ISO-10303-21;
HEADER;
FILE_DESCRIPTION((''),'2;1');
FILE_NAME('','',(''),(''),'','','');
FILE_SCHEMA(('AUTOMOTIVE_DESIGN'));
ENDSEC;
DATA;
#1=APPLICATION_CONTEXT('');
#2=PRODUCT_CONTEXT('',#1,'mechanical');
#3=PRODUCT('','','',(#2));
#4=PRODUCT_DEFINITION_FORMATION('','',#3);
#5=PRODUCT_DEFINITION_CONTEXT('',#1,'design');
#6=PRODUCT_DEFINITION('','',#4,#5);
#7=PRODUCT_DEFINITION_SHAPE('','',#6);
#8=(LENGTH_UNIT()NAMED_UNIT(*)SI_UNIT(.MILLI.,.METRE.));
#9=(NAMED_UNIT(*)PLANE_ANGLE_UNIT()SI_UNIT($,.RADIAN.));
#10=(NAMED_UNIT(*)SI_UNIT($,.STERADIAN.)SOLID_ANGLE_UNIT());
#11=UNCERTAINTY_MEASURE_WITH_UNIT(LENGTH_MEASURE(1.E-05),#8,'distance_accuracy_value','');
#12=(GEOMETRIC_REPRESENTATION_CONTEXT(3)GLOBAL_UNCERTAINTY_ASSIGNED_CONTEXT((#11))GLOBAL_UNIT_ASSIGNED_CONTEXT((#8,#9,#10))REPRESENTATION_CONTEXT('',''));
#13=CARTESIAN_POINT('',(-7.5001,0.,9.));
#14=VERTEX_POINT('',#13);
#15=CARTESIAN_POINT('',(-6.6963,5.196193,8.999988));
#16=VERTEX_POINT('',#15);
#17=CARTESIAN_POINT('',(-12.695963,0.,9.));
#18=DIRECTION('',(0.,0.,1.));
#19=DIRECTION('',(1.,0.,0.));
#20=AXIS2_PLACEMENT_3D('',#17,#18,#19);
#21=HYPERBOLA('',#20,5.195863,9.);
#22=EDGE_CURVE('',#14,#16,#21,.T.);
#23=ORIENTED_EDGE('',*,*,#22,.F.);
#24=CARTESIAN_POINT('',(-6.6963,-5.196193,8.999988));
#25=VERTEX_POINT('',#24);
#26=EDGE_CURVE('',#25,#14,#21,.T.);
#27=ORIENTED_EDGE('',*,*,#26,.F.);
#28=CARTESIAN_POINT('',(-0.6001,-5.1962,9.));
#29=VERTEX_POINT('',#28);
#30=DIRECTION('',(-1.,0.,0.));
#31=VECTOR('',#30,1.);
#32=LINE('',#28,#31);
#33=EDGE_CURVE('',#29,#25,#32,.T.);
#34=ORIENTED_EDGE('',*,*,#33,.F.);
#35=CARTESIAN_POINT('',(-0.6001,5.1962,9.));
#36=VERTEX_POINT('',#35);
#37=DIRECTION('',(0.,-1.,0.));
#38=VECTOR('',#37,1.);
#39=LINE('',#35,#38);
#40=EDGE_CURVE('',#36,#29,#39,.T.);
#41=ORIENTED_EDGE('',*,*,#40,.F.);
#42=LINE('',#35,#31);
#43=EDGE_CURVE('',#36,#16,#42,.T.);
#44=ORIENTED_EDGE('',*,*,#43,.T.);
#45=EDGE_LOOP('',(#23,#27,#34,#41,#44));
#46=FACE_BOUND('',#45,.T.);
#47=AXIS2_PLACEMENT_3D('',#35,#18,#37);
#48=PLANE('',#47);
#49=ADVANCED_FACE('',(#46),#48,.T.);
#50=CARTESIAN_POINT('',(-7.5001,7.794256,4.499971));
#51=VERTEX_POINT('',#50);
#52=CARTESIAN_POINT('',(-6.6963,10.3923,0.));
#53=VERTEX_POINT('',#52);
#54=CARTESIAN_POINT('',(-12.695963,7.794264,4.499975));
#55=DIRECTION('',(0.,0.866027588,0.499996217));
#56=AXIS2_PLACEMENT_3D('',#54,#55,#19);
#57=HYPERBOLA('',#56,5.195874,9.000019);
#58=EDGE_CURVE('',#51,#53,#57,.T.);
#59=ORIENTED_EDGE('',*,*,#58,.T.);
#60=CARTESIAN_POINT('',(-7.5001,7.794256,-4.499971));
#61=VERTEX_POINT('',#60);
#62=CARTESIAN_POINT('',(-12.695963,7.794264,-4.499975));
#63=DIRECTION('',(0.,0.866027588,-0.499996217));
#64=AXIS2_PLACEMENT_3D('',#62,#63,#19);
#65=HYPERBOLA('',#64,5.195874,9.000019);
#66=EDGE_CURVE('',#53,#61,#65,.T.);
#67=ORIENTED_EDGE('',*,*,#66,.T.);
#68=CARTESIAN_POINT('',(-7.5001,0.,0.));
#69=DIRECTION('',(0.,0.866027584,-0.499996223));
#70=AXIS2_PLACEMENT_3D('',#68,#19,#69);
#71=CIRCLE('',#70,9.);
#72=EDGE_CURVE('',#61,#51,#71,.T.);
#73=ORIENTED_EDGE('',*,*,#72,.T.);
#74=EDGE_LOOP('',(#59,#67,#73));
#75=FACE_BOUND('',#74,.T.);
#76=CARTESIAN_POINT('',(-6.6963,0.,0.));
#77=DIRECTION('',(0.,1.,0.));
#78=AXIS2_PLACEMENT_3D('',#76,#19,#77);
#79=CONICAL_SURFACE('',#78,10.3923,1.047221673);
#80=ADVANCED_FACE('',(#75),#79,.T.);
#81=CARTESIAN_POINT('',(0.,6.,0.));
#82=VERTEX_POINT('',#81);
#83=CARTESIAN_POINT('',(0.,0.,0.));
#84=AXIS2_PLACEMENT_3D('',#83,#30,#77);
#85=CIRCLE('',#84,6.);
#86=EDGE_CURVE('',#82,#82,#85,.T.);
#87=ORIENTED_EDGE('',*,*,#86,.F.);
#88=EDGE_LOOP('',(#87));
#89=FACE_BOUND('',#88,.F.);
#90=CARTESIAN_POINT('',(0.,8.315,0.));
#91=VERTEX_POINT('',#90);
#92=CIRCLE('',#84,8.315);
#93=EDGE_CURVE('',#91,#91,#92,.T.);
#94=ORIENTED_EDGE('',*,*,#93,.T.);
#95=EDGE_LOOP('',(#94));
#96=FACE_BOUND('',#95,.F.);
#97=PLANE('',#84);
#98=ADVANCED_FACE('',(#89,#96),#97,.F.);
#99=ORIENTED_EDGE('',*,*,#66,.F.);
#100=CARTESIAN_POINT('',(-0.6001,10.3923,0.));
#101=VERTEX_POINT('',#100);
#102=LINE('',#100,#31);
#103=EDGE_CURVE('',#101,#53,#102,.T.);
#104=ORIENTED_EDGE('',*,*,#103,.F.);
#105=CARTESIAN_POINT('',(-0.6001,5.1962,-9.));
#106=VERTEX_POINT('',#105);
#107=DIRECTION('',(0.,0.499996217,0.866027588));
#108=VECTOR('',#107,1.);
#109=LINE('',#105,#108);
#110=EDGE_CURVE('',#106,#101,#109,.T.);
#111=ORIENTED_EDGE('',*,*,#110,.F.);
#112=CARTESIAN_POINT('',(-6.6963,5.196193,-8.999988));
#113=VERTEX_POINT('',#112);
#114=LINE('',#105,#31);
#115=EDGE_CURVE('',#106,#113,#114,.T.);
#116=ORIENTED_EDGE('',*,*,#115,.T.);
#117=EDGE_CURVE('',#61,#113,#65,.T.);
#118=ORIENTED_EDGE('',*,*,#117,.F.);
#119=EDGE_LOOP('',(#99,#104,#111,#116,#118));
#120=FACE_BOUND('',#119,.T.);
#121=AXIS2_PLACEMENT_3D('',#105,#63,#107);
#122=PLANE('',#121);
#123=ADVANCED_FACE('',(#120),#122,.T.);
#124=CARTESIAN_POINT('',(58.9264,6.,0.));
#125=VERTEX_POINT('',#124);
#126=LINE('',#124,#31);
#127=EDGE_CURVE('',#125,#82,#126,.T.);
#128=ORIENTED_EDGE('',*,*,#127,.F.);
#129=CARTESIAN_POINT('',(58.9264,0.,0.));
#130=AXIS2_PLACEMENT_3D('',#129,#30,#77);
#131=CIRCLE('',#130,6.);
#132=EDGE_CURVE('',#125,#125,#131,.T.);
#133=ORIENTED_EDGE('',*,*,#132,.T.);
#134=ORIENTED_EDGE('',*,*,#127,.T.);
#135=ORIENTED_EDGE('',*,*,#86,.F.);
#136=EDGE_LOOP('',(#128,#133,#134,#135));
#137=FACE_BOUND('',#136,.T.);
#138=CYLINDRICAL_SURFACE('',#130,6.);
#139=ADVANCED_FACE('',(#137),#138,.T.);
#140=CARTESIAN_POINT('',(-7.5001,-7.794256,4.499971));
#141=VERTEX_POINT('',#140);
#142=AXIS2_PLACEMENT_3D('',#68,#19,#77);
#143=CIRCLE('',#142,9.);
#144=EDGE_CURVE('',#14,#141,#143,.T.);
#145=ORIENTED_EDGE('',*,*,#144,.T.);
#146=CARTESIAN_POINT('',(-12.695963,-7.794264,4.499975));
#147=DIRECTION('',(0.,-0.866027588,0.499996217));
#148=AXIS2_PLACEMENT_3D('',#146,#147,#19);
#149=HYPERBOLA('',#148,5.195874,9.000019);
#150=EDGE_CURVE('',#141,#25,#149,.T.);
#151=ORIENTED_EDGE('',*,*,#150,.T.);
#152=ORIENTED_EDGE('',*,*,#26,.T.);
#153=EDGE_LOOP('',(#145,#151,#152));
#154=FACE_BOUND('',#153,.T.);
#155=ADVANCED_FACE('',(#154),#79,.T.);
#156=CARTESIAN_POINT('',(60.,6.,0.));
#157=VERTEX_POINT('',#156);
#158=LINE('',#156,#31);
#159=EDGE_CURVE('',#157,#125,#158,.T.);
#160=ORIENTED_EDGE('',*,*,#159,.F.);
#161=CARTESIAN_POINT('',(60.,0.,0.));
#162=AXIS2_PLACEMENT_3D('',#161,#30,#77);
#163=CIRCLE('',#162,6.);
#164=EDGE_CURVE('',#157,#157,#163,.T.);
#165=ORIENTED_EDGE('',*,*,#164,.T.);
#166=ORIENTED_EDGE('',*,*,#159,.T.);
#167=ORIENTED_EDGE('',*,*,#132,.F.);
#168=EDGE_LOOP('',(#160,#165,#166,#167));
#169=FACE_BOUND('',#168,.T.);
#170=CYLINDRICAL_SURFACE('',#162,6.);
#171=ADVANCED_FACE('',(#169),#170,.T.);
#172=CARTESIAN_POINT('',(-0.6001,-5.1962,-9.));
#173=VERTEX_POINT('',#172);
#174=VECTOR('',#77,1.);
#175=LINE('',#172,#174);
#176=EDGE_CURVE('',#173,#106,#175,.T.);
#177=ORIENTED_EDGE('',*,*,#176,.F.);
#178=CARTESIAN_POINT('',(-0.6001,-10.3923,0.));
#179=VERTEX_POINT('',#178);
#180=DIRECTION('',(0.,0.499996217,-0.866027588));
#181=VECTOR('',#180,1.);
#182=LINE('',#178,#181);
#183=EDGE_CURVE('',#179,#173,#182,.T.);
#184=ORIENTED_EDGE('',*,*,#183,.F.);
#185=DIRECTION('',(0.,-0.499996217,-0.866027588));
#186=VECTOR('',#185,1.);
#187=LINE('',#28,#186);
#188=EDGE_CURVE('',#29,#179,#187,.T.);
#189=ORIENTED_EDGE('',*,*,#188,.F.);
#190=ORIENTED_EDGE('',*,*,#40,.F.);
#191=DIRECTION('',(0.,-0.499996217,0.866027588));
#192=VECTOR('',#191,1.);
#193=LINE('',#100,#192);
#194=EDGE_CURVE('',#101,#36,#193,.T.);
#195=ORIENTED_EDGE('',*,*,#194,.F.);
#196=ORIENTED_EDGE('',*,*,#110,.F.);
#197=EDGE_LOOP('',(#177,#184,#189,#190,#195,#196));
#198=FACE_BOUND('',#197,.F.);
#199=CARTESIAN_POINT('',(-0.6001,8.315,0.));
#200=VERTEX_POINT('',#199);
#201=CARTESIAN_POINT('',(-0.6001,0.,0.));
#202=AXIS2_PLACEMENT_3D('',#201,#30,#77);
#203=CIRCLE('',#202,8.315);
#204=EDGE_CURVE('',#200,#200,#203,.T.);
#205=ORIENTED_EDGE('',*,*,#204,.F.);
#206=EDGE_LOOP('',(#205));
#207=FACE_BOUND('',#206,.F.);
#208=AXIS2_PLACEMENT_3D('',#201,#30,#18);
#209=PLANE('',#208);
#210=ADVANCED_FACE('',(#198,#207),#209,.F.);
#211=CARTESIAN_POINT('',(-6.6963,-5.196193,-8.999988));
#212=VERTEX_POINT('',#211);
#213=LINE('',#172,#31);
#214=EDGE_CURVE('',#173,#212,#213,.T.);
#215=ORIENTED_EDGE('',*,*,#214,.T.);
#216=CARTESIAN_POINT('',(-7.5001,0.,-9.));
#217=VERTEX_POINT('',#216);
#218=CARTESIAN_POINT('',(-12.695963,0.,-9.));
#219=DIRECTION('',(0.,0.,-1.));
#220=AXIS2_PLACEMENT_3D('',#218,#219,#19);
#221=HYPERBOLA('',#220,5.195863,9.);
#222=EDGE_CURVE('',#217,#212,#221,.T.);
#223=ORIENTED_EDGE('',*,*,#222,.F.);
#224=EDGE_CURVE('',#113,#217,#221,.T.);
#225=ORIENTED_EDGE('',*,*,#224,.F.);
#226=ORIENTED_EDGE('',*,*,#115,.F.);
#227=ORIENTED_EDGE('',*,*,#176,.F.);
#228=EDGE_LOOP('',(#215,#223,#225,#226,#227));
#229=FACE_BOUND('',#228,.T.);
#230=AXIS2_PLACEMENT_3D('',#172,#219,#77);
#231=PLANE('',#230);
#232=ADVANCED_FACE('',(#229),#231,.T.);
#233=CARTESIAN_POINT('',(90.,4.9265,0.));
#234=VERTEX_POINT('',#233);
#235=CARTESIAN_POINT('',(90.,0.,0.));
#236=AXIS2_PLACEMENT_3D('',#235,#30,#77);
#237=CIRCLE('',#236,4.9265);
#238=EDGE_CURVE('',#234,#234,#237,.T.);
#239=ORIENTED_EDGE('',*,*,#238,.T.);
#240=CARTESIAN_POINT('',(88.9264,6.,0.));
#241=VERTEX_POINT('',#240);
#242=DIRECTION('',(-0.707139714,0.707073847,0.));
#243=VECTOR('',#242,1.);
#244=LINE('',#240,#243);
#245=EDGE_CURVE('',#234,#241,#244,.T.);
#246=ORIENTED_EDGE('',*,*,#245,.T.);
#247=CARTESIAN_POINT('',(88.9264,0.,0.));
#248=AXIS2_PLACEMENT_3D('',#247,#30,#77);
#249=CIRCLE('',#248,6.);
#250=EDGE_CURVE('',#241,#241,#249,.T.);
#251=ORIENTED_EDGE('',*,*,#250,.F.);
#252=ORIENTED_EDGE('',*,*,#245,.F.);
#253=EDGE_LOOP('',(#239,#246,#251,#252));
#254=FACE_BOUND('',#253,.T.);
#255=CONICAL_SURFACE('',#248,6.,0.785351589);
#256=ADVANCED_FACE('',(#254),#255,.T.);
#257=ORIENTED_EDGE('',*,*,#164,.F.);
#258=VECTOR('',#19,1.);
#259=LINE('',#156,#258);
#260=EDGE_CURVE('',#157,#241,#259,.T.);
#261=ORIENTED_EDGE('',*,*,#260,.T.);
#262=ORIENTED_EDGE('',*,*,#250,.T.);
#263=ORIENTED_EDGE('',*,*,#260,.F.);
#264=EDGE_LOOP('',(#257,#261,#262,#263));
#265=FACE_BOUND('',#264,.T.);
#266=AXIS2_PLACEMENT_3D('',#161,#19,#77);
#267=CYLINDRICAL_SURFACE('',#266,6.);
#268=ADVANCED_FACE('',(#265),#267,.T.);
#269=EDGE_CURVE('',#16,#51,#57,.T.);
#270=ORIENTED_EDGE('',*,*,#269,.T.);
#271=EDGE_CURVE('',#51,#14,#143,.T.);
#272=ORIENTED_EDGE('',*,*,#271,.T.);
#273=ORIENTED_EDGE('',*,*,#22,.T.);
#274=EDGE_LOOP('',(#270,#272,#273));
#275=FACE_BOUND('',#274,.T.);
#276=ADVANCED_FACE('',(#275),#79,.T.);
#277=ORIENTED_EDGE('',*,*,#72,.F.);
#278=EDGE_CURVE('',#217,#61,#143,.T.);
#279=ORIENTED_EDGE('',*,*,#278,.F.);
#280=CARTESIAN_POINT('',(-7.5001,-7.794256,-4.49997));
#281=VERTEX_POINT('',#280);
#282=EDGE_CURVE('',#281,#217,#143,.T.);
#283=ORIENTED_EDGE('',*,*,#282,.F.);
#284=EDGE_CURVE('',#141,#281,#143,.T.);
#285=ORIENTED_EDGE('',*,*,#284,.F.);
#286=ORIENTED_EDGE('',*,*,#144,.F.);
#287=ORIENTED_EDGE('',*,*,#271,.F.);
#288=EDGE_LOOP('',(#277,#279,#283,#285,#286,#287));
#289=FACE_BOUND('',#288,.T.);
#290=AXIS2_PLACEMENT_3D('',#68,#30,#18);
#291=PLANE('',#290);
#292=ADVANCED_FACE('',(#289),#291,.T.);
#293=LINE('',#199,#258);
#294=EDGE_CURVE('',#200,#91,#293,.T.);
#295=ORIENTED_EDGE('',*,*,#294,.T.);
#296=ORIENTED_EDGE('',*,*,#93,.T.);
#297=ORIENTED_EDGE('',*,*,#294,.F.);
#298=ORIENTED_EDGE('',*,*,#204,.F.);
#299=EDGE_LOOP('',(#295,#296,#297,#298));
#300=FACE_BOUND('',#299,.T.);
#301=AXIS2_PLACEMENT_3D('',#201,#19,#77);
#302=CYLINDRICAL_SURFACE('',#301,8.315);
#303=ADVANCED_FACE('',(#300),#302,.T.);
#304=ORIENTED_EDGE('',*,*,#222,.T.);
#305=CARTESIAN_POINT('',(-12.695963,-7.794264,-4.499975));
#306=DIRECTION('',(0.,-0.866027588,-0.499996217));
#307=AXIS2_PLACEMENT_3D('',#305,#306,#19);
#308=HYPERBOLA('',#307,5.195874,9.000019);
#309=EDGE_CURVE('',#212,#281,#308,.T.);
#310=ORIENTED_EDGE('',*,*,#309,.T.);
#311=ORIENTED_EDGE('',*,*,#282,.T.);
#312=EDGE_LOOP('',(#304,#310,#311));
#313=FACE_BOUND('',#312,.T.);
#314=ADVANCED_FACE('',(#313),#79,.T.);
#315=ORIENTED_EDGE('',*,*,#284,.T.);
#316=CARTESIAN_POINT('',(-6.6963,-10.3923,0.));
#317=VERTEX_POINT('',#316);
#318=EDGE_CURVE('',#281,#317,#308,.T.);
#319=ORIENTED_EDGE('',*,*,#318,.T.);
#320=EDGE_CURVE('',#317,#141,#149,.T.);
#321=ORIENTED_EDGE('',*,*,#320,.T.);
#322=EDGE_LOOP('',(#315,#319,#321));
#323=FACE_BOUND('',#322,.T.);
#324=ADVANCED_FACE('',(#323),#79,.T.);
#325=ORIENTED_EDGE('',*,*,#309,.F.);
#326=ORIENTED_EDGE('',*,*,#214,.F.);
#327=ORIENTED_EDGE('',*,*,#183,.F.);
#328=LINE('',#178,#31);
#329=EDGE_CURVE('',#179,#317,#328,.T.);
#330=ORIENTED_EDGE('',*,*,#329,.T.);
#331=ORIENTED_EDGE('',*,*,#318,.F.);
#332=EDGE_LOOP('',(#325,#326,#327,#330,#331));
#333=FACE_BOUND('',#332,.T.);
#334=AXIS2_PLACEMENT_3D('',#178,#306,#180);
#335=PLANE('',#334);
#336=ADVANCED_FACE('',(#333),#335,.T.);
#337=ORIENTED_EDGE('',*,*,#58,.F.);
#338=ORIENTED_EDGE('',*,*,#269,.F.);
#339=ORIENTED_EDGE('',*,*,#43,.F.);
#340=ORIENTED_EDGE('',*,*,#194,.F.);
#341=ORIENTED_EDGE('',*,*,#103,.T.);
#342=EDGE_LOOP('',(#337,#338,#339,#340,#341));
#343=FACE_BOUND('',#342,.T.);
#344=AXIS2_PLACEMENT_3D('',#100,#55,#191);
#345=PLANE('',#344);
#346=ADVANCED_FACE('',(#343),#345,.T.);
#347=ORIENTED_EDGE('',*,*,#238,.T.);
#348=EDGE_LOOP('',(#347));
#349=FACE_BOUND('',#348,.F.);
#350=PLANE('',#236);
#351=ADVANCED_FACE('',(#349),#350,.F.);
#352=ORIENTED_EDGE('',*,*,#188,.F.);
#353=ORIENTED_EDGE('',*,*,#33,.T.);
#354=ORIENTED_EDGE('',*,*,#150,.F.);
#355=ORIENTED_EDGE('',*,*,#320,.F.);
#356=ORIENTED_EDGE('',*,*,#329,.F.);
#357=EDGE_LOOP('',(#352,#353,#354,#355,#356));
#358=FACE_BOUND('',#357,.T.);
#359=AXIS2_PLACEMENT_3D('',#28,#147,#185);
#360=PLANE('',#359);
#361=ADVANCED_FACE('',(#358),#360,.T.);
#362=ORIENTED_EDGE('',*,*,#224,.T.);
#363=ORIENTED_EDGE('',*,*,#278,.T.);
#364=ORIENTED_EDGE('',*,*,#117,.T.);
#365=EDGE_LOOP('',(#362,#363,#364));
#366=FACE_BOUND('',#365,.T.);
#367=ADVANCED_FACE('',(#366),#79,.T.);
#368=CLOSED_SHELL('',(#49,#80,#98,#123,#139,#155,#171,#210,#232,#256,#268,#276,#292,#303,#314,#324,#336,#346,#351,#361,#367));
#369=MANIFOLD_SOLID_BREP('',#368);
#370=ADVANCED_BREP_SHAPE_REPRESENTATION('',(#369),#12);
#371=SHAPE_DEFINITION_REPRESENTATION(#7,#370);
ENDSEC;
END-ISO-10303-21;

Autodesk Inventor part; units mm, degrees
ref_plane "YZ Plane" through (0, 0, 0) normal (1, 0, 0) x (0, 1, 0)
ref_plane "XZ Plane" through (0, 0, 0) normal (0, 1, 0) x (-1, 0, 0)
sketch "Sketch1" plane through (0, 0, 0) normal (0, 0, 1) x (1, 0, 0)
  line L0 (0, 8.315) -> (0, 6)
  line L1 (60, 6) -> (90, 6)
  line L2 (90, 6) -> (90, 0)
  line L3 (90, 0) -> (-0.6001, 0)
  line L4 (-18.7201, 0) -> (108.12, 0) projected
  line L5 (-0.6001, 0) -> (-0.6001, 8.315)
  line L6 (-0.6001, 8.315) -> (0, 8.315)
  line L7 (60, 6) -> (58.9264, 6)
  line L8 (58.9264, 6) -> (0, 6)
  line L9 (0, -1.663) -> (0, 9.978) projected
  dimension "d0" = 90
  dimension "d1" = 30
  dimension "d2" = 12
  dimension "d9" = 0.6001
  dimension "d10" = 16.63
  dimension "d13" = 1.0736
  dimension "d14" = 12
revolve "Body" add sketch "Sketch1" angle 360 about axis through (90, 0, 0) along (-1, 0, 0)
sketch "Sketch2" plane through (-0.6001, 0, 0) normal (-1, 0, 0) x (0, 0, 1)
  line L0 (0, 10.3923) -> (9, 5.1962)
  line L1 (9, 5.1962) -> (9, -5.1962)
  line L2 (9, -5.1962) -> (0, -10.3923)
  line L3 (0, -10.3923) -> (-9, -5.1962)
  line L4 (-9, -5.1962) -> (-9, 5.1962)
  line L5 (-9, 5.1962) -> (0, 10.3923)
  point P0 (0, 0)
  point P1 (0, 0)
  dimension "d11" = 18
extrude "Head" add sketch "Sketch2" along normal blind 6.9
sketch "Sketch4" plane through (0, 0, 0) normal (0, 0, 1) x (1, 0, 0)
  line L0 (-7.5001, 9) -> (-7.5001, 10.3923)
  line L1 (-7.5001, 10.3923) -> (-6.6963, 10.3923)
  line L2 (-6.6963, 10.3923) -> (-7.5001, 9)
  line L3 (-8.8801, 0) -> (0.7799, 0) projected
  line L4 (-0.6001, 10.3923) -> (-7.5001, 10.3923) projected
  line L5 (-7.5001, 5.1962) -> (-7.5001, 10.3923) projected
  dimension "d5" = 30
  dimension "d19" = 18
revolve "Chamfer1" cut sketch "Sketch4" angle 360 about axis through (-10, 0, 0) along (1, 0, 0)
thread "Thread" size "M12x1.75" class "6g" standard "ISO Metric profile" length 30
chamfer "Chamfer2" distance 1.0735 distance2 1.0736 1 edges at (90, -6, 0) measured on face at (90, 0.7092, -1.87)
ref_plane "Work Plane1" through (1.525, 0, 0) normal (0, 0, 1) x (1, 0, 0)
equation "\"d11\" = SW"
equation "\"d3\" = KOH - SD"
equation "\"d15\" = GEL"
equation "\"d6\" = -0.5 * SPD + 0.5 * GD"
equation "\"d0\" = NLG"
equation "\"d1\" = GEL"
equation "\"d2\" = GD"
equation "\"d10\" = SD2"
equation "\"d14\" = BDM"
equation "\"d5\" = ANG1"
equation "\"d19\" = SW0"
equation "\"NLG\" = 90"
equation "\"GD\" = NND"
equation "\"BDM\" = NND"
equation "\"KOH\" = 7.5"
equation "\"GEL\" = 30"
equation "\"SW\" = 18"
equation "\"SW0\" = SW"
equation "\"SPD\" = NND - 1.2269 * PTC"
equation "\"SD2\" = 16.63"
equation "\"SD\" = 0.6"
equation "\"ANG1\" = 30deg"
equation "\"GAL\" = 0.61345 * PTC"
equation "\"GUL\" = 0.61345 * PTC"
equation "\"RR\" = 0.6"
equation "\"GD1\" = THREADDIA - 1.2269 * PTC"
equation "\"THREADDIA\" = 12"
equation "\"SDH\" = SD2"
equation "\"TOA\" = 30deg"
equation "\"PTC\" = 1.75"
equation "\"NND\" = 12"
equation "\"E0\" = 1.155 * SW"
properties part number "ISO 4014 - M12 x 90" material "Stainless Steel, 440C"
